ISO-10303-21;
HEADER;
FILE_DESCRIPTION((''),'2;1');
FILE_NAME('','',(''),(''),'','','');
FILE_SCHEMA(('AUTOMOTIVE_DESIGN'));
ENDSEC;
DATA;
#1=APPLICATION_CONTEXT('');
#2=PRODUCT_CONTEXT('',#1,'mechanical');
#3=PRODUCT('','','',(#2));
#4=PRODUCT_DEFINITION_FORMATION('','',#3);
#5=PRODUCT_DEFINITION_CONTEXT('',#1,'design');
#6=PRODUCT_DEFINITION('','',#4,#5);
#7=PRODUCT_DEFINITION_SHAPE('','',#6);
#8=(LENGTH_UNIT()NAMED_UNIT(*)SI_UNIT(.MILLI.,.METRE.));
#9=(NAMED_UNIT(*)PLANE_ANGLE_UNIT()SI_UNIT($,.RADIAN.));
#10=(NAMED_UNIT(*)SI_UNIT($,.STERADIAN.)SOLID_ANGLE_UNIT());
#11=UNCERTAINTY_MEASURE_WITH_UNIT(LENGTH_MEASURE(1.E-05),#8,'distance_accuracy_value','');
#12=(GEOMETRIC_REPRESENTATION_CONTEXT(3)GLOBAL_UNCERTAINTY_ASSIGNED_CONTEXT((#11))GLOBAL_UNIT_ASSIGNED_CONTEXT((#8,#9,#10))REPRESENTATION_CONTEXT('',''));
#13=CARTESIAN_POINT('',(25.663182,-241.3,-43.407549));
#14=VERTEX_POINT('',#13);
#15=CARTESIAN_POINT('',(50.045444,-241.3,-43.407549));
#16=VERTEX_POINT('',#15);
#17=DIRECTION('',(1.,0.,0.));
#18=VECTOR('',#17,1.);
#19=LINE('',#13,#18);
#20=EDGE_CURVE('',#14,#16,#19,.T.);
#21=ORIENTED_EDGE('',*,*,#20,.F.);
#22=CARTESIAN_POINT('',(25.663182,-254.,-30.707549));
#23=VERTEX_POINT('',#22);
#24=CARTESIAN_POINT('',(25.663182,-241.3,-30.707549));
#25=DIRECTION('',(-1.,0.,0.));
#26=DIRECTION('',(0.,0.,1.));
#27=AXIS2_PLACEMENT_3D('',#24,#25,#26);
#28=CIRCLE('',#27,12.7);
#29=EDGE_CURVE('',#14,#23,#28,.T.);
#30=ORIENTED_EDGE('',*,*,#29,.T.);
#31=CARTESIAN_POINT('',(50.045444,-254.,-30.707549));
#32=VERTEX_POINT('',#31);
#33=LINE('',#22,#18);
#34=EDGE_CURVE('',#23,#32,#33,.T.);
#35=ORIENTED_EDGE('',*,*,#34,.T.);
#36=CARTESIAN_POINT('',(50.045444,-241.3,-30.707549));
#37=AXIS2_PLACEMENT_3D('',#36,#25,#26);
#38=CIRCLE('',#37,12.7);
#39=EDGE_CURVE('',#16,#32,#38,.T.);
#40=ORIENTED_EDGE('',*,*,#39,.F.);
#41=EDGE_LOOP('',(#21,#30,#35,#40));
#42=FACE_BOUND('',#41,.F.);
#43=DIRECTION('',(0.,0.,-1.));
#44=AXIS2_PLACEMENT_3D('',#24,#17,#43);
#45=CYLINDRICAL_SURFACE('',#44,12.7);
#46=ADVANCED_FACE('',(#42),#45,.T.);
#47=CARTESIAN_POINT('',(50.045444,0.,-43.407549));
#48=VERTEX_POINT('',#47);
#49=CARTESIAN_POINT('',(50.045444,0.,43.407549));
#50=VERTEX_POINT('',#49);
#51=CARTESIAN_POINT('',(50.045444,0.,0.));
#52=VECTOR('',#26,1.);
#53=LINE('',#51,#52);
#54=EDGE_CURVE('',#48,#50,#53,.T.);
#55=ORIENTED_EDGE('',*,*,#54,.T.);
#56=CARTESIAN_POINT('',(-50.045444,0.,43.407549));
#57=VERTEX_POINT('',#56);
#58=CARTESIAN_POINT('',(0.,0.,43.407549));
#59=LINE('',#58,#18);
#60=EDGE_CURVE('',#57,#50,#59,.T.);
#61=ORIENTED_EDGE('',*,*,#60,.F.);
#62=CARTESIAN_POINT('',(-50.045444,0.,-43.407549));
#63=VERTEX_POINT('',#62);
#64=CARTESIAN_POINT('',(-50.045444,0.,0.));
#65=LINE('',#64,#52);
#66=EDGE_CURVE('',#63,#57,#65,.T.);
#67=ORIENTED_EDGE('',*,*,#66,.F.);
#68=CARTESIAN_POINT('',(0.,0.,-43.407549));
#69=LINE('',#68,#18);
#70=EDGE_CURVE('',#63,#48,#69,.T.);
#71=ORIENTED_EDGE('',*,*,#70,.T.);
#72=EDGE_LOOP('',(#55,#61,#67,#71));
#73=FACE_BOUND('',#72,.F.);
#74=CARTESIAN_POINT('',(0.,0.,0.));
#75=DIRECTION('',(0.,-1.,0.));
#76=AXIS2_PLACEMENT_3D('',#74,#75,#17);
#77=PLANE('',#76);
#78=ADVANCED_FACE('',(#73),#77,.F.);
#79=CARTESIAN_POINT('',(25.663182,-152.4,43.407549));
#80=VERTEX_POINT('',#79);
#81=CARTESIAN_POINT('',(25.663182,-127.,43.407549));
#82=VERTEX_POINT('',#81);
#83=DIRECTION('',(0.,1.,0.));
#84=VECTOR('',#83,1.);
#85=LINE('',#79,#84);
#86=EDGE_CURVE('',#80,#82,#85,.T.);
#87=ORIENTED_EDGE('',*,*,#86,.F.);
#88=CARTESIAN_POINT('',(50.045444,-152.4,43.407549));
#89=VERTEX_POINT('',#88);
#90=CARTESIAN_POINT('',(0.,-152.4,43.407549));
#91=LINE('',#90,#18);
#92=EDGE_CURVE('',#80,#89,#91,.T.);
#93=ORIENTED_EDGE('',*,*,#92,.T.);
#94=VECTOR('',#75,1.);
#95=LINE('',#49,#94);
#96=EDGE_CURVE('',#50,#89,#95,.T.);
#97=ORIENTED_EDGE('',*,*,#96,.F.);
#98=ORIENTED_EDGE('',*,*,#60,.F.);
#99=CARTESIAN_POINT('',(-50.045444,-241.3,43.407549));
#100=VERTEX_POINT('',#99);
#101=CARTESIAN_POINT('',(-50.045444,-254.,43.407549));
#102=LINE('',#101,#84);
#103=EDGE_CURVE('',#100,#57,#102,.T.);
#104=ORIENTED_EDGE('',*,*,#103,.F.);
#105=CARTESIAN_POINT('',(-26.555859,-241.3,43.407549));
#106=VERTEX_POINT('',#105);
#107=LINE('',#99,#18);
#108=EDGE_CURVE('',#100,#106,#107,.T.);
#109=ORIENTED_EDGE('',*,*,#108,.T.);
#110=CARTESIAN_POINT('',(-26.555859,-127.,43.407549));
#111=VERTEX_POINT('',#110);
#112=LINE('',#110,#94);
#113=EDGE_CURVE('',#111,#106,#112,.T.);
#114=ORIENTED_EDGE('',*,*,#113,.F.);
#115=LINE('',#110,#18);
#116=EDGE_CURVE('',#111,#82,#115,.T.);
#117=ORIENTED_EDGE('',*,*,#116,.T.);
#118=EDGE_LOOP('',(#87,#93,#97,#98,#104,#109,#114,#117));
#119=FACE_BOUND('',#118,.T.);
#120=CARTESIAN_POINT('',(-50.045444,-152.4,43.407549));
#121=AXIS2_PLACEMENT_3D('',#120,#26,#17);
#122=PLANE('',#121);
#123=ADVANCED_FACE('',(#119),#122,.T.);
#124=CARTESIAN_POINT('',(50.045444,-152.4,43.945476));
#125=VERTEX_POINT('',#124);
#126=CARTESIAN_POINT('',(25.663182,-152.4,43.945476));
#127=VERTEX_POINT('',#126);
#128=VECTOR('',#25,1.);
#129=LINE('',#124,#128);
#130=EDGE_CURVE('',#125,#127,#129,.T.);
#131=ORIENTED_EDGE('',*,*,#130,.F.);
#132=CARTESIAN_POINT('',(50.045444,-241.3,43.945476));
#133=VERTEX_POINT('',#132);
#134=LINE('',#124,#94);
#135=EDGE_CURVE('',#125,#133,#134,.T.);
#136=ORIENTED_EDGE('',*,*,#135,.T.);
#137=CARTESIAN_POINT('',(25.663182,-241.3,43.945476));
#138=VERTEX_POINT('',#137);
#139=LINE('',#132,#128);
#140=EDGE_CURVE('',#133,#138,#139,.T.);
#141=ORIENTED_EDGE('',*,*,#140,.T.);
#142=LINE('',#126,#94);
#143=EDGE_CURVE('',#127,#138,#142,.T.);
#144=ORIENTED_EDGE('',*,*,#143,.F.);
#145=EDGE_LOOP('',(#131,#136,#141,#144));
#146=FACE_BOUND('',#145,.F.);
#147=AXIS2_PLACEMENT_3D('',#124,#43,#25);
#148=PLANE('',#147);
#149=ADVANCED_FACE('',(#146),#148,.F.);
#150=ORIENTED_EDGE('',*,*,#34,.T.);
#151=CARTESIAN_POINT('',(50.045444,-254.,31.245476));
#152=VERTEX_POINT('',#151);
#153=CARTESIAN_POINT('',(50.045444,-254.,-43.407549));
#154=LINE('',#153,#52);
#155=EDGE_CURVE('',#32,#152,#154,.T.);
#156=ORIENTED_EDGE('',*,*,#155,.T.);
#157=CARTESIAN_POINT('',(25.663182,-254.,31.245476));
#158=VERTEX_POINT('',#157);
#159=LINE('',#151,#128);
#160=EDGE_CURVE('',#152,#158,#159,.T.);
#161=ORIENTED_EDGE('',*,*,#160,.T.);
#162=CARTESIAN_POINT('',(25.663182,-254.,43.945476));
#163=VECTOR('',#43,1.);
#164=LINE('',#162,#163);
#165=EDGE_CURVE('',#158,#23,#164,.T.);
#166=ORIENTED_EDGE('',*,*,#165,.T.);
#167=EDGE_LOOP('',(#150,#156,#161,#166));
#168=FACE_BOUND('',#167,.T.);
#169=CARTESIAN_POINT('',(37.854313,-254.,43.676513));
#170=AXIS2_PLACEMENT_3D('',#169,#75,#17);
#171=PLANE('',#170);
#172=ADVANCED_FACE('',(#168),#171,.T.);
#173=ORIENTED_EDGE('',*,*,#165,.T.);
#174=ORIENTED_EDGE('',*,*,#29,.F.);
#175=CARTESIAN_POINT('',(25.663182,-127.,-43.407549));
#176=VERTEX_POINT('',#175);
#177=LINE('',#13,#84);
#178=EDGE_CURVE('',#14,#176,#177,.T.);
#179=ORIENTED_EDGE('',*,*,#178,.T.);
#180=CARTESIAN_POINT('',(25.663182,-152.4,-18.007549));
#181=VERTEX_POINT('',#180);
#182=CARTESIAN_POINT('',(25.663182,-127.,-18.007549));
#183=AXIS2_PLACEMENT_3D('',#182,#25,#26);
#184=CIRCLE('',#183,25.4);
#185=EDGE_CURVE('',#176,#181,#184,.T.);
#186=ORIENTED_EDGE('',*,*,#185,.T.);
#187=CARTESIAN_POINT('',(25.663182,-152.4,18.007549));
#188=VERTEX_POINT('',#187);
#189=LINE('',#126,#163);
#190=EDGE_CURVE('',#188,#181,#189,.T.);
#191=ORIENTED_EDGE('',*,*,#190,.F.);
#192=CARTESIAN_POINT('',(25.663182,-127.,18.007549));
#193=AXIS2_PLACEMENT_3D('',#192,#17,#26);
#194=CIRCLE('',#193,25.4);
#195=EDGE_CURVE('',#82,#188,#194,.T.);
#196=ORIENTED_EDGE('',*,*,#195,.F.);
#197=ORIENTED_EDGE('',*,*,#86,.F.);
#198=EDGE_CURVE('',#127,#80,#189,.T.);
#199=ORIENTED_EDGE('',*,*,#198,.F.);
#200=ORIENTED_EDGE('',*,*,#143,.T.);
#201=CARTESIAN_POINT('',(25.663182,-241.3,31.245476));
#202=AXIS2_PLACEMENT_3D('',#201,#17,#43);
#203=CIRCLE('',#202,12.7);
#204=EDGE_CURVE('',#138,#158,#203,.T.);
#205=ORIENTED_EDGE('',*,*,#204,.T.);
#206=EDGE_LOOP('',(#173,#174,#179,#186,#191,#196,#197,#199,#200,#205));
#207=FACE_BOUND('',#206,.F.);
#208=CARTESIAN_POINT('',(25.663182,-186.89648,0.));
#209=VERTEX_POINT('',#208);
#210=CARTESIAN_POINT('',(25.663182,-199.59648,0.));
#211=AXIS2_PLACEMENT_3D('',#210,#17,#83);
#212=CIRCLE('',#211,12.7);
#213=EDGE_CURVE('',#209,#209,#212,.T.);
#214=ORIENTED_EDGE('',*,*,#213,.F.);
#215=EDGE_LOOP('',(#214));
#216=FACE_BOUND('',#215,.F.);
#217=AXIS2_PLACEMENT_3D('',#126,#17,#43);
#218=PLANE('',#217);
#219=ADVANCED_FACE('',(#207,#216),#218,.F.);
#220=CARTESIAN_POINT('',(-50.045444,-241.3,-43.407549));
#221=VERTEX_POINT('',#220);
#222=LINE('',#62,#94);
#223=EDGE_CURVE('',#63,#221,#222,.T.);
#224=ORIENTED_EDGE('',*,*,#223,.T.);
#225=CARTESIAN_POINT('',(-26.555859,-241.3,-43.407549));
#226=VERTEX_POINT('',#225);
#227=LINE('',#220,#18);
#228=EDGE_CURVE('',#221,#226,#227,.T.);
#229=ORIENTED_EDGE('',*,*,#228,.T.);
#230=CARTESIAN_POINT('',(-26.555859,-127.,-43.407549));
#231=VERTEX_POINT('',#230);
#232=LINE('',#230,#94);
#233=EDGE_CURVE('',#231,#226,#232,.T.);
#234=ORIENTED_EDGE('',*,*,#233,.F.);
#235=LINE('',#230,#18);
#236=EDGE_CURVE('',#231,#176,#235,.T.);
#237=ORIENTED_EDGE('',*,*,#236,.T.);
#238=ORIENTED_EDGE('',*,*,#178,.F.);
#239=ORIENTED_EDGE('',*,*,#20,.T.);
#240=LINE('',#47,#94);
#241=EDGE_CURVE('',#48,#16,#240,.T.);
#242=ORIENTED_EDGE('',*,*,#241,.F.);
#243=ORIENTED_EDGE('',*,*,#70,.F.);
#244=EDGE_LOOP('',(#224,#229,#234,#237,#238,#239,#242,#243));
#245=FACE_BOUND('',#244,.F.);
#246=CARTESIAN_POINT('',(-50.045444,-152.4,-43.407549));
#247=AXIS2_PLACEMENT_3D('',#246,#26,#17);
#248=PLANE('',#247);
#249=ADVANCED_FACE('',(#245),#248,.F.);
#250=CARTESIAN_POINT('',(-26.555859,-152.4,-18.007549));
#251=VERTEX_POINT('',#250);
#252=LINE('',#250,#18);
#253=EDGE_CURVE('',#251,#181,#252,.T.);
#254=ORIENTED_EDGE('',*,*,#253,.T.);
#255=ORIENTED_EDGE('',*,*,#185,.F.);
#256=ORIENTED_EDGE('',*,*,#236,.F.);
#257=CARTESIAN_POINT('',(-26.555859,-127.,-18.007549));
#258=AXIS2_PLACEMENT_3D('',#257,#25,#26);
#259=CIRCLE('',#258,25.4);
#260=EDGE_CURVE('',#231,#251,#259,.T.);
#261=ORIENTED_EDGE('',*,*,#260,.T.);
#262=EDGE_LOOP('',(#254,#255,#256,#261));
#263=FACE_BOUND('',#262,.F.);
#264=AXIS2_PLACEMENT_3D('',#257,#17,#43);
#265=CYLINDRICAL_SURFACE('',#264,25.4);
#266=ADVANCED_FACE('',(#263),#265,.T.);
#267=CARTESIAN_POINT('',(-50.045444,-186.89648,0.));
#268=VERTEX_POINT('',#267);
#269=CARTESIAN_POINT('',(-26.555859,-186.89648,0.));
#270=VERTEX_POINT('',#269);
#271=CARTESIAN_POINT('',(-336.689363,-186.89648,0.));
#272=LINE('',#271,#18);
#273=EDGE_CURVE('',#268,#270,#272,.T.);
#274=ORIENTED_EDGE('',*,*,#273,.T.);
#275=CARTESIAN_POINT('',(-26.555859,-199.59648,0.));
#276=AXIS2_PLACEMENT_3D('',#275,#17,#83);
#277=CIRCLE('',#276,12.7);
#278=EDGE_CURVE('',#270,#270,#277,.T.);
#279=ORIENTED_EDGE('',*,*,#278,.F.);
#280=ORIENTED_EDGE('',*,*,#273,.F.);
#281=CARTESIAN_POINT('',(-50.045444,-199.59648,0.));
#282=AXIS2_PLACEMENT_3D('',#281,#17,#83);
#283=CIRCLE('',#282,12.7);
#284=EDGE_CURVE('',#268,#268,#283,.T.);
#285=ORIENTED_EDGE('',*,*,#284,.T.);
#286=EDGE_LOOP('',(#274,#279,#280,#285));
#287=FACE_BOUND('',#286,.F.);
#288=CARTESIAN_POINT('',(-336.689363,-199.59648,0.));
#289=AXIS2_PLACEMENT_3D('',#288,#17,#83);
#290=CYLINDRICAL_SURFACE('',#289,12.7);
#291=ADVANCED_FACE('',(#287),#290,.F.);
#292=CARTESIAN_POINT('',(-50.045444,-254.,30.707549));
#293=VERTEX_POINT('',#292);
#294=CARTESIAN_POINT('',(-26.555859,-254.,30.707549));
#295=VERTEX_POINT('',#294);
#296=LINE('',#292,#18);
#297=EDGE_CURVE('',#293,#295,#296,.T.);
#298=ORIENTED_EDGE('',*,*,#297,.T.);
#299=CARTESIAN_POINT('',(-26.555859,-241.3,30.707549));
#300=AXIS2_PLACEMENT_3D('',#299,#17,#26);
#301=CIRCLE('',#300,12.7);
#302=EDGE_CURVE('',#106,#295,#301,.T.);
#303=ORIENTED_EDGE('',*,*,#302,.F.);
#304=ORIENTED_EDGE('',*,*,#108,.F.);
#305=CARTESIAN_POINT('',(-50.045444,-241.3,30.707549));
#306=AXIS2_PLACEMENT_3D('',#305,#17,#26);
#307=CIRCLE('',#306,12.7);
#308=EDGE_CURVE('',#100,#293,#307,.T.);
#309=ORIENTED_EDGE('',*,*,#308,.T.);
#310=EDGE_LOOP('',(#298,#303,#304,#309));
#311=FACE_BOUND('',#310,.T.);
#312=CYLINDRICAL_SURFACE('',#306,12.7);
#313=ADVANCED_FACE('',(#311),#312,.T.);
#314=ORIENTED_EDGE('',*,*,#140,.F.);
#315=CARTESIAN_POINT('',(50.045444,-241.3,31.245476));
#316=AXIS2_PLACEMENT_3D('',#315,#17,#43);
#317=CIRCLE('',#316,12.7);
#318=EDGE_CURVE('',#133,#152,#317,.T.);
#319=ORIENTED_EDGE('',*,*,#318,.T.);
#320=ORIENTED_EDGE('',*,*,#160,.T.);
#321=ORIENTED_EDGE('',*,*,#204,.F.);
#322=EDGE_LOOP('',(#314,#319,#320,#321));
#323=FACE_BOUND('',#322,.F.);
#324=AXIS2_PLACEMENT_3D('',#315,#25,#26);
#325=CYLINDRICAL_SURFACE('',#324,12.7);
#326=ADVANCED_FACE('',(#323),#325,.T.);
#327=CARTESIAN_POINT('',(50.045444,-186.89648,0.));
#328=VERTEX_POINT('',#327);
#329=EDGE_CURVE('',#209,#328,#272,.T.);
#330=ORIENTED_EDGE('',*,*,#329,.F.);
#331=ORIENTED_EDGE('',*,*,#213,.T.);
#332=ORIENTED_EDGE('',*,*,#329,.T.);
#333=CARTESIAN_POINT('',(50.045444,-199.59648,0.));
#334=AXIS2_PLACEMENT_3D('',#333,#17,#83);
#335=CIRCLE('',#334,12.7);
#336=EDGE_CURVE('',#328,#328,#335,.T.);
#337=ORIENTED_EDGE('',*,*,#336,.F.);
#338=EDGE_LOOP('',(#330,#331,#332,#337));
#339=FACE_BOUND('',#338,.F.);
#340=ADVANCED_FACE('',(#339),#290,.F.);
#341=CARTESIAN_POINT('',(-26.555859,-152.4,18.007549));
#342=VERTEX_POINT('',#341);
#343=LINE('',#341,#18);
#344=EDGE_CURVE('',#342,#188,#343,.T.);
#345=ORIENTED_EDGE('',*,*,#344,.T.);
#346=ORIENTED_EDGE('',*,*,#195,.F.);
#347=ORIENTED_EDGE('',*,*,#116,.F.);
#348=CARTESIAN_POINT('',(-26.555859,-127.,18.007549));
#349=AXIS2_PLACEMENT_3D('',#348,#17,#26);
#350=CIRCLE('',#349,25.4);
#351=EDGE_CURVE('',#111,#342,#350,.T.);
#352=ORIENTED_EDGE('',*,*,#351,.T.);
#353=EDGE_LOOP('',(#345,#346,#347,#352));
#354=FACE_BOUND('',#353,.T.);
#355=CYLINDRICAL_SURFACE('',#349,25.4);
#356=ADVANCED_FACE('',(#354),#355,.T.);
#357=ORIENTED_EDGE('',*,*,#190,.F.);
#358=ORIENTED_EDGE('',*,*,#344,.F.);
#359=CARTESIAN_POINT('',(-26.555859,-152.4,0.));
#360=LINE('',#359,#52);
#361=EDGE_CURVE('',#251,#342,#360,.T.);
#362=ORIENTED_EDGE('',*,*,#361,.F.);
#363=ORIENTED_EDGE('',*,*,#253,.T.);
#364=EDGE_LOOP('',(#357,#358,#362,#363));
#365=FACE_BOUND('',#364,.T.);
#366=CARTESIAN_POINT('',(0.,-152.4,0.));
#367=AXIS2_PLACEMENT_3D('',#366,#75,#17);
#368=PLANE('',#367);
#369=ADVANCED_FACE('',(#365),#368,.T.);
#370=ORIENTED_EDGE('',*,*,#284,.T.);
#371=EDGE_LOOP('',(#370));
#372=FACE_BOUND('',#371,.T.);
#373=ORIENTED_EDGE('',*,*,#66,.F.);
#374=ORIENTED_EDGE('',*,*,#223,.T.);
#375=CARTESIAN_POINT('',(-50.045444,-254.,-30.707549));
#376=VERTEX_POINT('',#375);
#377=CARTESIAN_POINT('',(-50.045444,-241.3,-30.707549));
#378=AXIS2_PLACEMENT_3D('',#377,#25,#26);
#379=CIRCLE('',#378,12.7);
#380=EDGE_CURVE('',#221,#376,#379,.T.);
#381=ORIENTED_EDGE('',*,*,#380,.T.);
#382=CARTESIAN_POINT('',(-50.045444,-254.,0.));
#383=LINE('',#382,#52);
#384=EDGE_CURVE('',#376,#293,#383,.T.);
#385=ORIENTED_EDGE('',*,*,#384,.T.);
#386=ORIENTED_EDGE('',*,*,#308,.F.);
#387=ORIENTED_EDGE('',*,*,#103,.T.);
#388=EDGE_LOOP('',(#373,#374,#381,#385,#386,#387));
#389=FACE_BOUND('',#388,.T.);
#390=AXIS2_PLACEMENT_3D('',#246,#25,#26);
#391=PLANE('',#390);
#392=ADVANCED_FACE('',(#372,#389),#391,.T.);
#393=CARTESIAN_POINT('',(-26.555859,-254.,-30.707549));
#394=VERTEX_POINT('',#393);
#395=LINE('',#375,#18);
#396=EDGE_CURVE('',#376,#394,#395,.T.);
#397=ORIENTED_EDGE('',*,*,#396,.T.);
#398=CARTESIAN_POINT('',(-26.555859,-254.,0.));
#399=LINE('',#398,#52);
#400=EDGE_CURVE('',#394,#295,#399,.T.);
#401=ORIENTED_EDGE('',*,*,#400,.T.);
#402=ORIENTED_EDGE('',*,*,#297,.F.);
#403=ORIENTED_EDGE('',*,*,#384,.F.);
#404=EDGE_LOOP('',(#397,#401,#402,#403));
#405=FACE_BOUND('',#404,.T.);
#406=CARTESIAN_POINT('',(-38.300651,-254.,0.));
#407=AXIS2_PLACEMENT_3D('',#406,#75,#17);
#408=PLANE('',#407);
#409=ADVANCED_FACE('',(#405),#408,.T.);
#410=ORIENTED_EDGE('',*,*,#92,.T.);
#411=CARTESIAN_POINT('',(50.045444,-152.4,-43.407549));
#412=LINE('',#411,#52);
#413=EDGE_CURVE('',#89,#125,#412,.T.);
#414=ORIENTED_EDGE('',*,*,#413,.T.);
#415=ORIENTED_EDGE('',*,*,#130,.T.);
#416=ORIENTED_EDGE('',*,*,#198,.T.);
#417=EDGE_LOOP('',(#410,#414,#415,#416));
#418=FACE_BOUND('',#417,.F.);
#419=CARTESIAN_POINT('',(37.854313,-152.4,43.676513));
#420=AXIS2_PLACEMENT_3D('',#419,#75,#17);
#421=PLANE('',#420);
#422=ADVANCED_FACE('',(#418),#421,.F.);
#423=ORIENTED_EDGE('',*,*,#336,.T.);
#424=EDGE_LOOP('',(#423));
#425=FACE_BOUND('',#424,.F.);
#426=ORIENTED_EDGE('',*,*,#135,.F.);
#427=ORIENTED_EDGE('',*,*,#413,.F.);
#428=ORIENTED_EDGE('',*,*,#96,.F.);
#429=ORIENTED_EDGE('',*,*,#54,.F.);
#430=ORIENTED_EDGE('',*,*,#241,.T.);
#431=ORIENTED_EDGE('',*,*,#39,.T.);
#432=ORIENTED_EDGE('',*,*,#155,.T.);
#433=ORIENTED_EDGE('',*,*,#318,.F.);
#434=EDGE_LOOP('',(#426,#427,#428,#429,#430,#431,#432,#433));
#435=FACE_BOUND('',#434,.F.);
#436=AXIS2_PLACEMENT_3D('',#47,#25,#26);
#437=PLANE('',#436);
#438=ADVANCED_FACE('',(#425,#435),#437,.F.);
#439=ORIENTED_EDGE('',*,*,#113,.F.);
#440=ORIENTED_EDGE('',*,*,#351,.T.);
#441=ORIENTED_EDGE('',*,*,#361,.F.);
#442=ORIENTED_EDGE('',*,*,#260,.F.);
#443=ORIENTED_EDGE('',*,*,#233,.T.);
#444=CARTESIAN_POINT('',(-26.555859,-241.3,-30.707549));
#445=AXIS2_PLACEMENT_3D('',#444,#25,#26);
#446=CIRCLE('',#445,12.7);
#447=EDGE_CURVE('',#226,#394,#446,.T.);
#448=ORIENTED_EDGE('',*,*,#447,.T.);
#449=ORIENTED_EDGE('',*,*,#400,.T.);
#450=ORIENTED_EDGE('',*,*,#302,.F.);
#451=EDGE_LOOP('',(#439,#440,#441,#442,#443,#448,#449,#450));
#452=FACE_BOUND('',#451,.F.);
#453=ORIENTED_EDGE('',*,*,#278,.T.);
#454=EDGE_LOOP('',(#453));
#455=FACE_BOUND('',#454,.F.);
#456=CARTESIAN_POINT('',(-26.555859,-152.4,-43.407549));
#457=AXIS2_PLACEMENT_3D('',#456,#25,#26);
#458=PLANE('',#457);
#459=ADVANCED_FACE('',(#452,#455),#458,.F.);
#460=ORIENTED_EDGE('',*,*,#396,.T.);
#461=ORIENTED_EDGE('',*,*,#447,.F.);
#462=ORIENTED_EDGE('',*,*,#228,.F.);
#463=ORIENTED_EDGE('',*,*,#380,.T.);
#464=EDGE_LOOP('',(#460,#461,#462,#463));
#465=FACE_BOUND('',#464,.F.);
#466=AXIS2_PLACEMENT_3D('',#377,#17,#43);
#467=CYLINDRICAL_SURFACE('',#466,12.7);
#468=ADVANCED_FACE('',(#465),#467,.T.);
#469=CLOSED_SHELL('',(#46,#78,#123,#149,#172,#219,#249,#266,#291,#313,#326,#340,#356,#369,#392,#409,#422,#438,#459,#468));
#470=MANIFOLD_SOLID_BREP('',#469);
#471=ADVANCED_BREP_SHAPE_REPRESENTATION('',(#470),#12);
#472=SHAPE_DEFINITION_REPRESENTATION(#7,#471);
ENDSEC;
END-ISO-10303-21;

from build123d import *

# Parameters (mm, degrees)
F0_W     = 100.0908872011
F0_H     = 86.8150984859
F1_DEPTH = 152.4
F2_W     = 23.4895850481
F2_H     = 86.8150984859
F2_W_2   = 0.6694942713
F2_W_3   = 23.7127671899
F3_DEPTH = 101.6
F4_R     = 12.7
F6_D     = 25.4
F7_R     = 25.4


with BuildPart() as f1:
    # F0 (on Front) → F1 (new body)
    with BuildSketch(Plane.XZ):
        Rectangle(F0_W, F0_H)
    extrude(amount=F1_DEPTH)

    # F2 (on face) → F3 (join)
    with BuildSketch(Plane.XZ.offset(152.4)):
        with Locations((-38.3006510765, 0)):
            Rectangle(F2_W, F2_H)
        Polygon((25.6631821394, 43.9454764128), (25.6631821394, 43.4075492429), (26.3326764107, 43.4075492429), (50.0454436006, 43.4075492429), (50.0454436006, 43.9454764128), align=None)
        with Locations((25.997929275, 0)):
            Rectangle(F2_W_2, F2_H)
        with Locations((38.1890600056, 0)):
            Rectangle(F2_W_3, F2_H)
    extrude(amount=F3_DEPTH)

    # F4
    f4_edges = [f1.edges().sort_by_distance(p)[0] for p in [
        (-38.300651, -254, -43.407549),
        (37.854313, -254, -43.407549),
        (37.854313, -254, 43.945476),
        (-38.300651, -254, 43.407549),
    ]]
    fillet(f4_edges, radius=F4_R)

    # F6 (through all)
    with Locations(Plane(origin=(-50.0454436006, 0, 0), x_dir=(0, -1, 0), z_dir=(-1, 0, 0))):
        with Locations((199.5964795351, 0)):
            Hole(F6_D / 2)

    # F7
    f7_edges = [f1.edges().sort_by_distance(p)[0] for p in [
        (-0.446338, -152.4, -43.407549),
        (-0.446338, -152.4, 43.407549),
    ]]
    fillet(f7_edges, radius=F7_R)


solid = f1.part
